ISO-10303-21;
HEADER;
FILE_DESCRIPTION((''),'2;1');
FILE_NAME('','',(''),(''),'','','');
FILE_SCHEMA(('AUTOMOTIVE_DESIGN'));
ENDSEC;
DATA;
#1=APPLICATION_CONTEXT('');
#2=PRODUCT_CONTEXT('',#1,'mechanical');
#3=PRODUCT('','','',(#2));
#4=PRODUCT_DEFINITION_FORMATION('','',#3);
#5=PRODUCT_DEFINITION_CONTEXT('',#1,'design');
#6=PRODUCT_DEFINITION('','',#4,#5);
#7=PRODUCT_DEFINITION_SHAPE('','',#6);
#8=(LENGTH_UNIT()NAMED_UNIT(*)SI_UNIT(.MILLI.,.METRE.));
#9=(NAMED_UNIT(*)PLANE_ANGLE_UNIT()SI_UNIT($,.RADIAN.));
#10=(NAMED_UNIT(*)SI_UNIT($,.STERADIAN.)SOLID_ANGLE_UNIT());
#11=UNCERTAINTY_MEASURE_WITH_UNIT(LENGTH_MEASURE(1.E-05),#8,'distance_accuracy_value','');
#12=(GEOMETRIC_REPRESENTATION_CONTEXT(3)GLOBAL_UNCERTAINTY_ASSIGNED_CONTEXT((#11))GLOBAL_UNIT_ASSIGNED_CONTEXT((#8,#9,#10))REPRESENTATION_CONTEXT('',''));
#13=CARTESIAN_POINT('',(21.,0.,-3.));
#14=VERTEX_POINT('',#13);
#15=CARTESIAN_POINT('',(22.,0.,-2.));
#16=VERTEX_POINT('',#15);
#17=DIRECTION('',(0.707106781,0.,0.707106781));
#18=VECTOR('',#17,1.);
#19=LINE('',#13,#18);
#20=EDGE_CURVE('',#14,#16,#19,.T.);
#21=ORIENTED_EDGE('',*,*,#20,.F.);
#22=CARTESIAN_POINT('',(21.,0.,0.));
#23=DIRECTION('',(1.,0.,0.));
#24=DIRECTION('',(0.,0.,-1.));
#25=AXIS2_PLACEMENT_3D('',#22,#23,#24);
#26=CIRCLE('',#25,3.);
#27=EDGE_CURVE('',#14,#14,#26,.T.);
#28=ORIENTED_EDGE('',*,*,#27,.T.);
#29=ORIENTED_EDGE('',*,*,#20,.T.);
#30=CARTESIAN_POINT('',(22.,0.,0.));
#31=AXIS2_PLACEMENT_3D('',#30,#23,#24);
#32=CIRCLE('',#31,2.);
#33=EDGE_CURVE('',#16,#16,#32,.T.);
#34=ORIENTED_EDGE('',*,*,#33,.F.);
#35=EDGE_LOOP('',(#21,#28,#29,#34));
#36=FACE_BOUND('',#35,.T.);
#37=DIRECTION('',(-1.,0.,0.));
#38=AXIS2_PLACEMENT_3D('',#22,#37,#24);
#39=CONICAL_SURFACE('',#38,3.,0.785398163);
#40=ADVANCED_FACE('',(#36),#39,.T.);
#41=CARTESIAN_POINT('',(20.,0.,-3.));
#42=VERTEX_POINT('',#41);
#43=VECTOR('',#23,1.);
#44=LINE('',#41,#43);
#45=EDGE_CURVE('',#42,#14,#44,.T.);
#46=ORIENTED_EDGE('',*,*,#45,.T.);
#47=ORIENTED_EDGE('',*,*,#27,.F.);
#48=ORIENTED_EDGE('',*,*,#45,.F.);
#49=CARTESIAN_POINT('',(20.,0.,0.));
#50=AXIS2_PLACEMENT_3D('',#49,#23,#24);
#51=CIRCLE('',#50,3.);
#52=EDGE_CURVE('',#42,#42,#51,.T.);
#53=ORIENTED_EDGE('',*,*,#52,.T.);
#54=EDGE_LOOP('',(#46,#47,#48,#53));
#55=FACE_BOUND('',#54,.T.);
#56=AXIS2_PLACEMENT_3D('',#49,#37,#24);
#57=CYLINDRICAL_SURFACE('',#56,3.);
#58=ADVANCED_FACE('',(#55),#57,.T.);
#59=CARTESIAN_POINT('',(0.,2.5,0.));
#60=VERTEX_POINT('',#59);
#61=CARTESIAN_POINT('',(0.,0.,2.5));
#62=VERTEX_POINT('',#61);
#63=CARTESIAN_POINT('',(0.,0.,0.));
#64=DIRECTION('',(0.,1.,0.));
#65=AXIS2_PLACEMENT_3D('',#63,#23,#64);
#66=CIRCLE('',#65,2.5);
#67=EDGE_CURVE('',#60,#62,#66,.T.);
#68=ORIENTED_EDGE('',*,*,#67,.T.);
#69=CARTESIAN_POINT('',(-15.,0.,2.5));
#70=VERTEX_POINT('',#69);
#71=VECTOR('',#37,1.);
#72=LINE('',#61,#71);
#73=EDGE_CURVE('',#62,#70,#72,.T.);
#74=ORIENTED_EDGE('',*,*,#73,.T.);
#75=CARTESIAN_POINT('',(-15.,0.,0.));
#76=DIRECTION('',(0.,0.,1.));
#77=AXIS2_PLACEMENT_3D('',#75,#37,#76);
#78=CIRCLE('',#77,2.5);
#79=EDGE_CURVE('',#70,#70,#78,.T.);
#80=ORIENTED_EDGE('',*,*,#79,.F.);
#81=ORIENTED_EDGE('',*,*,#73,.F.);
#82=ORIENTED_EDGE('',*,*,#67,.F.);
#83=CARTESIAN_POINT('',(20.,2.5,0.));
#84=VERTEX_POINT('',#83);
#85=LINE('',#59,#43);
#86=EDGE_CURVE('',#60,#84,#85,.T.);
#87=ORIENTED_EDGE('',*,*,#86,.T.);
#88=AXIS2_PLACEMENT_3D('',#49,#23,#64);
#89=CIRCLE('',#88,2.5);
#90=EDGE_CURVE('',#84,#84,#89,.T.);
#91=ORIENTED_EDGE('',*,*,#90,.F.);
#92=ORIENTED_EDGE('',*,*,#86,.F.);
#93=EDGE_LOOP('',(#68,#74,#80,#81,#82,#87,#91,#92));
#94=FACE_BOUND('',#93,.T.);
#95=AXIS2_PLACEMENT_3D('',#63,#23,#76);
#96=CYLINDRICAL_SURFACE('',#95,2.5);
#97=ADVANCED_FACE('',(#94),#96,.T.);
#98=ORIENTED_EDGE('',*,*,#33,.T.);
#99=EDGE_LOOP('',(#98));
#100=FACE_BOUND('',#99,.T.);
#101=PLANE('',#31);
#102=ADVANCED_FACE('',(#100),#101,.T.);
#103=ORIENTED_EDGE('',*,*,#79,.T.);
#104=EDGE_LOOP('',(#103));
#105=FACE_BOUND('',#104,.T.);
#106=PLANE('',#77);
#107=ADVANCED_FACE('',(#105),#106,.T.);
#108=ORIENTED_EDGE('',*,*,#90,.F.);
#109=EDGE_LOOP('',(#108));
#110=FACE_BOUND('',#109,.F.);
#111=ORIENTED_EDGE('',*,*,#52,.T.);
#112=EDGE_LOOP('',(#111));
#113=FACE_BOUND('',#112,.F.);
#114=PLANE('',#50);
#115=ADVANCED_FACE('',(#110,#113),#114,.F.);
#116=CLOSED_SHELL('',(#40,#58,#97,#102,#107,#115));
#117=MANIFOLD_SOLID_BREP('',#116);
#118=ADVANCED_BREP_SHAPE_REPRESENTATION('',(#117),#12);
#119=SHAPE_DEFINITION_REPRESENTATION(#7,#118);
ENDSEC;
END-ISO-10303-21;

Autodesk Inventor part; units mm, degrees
ref_plane "YZ Plane" through (0, 0, 0) normal (1, 0, 0) x (0, 1, 0)
ref_plane "XZ Plane" through (0, 0, 0) normal (0, 1, 0) x (-1, 0, 0)
ref_plane "XY Plane" through (0, 0, 0) normal (0, 0, 1) x (1, 0, 0)
sketch "Sketch1" plane through (0, 0, 0) normal (1, 0, 0) x (0, 1, 0)
  circle A0 centre (0, 0) radius 2.5
  dimension "d0" = 5
extrude "Extrusion1" add sketch "Sketch1" along normal blind 20
sketch "Sketch2" plane through (20, 0, 0) normal (1, 0, 0) x (0, 0, -1)
  circle A0 centre (0, 0) radius 3
  dimension "d3" = 6
extrude "Extrusion2" add sketch "Sketch2" along normal blind 2
chamfer "Chamfer1" distance 1 angle 45 1 edges at (22, 0, 3)
sketch "Sketch4" plane through (0, 0, 0) normal (-1, 0, 0) x (0, 0, 1)
  circle A0 centre (0, 0) radius 2.5
extrude "Extrusion4" add sketch "Sketch4" along normal blind 15
properties part number "Motor Shaft"
